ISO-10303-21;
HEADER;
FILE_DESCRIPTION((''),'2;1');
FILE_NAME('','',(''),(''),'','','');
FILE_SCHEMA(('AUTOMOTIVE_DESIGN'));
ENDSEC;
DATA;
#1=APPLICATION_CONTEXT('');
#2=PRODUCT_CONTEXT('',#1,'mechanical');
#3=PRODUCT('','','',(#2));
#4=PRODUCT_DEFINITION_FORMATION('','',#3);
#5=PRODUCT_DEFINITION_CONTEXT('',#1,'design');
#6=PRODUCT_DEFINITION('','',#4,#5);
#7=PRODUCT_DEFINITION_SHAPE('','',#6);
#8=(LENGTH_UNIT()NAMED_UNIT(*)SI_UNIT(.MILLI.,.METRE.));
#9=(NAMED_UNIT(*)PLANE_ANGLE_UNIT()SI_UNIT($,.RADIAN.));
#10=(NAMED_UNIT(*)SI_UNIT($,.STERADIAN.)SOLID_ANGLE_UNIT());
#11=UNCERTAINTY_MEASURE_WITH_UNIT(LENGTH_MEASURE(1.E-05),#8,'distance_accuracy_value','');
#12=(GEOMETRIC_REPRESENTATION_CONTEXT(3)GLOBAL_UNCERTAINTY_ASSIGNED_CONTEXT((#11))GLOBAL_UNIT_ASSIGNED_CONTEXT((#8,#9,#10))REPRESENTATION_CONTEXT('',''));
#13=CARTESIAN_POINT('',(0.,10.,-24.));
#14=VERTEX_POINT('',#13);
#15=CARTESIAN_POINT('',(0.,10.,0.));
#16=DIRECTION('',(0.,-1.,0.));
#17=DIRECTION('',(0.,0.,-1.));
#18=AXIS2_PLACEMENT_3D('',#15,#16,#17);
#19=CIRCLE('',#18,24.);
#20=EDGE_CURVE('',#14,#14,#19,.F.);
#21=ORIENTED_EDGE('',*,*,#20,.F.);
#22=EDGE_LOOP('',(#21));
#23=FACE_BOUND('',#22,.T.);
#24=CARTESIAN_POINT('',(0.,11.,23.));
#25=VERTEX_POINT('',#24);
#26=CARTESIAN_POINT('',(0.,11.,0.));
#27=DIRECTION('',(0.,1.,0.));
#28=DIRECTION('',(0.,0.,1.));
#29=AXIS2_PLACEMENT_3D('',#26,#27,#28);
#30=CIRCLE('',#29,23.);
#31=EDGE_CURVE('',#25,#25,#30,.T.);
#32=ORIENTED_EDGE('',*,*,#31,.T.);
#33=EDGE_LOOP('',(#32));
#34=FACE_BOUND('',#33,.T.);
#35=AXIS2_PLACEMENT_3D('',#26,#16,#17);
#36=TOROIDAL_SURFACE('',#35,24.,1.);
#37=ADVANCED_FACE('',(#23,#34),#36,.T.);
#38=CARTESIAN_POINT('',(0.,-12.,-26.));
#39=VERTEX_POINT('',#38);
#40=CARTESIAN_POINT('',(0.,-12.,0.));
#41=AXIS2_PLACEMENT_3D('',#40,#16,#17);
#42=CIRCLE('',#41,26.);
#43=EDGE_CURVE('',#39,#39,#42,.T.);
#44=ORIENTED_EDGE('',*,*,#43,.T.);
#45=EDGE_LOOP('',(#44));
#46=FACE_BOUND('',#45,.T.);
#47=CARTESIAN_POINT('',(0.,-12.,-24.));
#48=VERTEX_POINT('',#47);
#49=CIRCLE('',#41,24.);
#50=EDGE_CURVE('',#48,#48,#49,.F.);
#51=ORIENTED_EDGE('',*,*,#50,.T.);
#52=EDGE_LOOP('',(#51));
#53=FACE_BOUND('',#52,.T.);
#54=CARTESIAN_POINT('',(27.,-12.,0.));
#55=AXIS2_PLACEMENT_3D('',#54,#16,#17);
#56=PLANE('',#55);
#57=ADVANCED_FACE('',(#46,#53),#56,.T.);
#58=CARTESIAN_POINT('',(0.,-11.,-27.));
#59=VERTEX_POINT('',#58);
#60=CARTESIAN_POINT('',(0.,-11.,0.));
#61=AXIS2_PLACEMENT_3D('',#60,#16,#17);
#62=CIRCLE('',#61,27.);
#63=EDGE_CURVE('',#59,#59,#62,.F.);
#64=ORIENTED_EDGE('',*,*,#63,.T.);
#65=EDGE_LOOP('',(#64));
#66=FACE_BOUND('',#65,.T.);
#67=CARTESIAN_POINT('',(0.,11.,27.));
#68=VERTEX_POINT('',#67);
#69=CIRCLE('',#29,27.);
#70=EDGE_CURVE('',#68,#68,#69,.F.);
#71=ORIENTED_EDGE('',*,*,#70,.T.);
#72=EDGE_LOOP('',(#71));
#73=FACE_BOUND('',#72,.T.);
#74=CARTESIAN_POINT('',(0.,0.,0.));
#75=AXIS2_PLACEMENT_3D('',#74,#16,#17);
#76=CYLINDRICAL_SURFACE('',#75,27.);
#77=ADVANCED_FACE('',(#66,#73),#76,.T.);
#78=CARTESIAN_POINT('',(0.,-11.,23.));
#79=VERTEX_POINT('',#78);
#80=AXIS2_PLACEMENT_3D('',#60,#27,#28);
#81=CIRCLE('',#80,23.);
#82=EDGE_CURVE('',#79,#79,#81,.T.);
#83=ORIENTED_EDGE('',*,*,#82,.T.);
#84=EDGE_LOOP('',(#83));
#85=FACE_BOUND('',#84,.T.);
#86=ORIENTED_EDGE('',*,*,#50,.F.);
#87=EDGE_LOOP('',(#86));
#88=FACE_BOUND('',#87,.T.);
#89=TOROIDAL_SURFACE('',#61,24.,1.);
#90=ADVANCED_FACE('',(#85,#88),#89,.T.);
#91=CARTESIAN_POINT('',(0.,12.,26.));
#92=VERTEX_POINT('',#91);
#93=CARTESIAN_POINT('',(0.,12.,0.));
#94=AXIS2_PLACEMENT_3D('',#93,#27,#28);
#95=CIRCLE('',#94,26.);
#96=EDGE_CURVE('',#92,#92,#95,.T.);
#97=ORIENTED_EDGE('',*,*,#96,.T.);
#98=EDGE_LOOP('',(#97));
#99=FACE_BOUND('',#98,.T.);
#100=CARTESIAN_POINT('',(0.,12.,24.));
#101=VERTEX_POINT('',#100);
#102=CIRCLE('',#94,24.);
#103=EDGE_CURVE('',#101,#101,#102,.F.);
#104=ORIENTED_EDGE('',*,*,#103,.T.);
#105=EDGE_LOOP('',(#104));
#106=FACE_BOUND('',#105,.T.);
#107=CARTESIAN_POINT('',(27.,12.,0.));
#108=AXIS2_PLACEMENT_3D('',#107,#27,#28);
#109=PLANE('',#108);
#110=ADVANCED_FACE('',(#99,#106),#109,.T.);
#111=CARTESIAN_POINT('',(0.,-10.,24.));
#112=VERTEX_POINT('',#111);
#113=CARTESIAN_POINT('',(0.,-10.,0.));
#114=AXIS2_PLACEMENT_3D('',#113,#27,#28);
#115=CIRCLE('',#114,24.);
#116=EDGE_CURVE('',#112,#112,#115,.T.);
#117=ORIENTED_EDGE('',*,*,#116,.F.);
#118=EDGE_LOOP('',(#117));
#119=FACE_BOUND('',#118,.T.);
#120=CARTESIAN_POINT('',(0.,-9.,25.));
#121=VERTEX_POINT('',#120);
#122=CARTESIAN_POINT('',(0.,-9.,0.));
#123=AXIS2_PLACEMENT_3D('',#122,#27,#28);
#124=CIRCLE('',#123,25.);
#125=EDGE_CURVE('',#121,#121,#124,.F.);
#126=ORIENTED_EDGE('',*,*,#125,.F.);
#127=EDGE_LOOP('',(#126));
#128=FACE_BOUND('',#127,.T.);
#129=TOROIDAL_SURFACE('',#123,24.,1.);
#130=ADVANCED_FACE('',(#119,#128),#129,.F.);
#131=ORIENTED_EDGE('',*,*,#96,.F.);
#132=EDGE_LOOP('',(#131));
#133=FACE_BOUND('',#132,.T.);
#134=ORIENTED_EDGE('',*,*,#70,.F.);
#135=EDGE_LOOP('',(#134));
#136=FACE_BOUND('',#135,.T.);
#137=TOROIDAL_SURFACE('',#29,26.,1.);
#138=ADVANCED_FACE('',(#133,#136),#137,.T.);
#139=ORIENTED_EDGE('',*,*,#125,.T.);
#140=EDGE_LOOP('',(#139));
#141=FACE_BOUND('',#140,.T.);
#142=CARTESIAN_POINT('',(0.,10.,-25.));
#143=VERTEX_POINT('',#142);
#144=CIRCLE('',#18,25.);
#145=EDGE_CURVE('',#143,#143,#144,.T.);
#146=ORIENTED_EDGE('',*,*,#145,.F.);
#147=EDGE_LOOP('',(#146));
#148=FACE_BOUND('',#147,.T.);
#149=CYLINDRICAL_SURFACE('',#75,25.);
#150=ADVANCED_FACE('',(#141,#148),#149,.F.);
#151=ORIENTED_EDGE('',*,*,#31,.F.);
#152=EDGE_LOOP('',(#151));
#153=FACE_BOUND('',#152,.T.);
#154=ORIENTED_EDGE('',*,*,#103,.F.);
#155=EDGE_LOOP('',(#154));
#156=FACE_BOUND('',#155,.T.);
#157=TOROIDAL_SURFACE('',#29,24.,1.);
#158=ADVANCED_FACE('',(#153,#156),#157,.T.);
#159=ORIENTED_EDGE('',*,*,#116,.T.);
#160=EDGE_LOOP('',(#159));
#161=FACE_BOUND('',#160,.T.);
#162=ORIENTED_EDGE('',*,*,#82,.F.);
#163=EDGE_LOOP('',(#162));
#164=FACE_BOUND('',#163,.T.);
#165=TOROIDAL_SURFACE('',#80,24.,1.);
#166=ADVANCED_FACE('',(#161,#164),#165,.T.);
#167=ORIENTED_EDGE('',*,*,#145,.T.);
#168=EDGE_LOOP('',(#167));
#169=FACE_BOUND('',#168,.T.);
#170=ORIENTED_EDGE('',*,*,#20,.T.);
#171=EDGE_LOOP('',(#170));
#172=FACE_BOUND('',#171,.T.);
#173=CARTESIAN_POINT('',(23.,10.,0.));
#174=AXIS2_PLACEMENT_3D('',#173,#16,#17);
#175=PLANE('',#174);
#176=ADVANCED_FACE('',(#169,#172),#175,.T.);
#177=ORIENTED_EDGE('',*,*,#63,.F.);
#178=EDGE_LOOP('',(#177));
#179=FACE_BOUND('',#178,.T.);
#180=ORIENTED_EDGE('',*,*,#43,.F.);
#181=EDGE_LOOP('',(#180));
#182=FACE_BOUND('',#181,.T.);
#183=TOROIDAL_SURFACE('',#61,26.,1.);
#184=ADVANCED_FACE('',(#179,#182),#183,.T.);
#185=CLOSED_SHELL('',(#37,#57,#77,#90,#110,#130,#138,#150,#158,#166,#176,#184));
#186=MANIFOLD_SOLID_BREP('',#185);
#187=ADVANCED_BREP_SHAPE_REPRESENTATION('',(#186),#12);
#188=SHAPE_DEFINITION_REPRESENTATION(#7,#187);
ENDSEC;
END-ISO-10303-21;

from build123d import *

# Parameters (mm, degrees)
FILLET1_R = 1


with BuildPart() as part:
    # Sketch3 → Revolve1 (revolve)
    with BuildSketch(Plane.XY, mode=Mode.PRIVATE) as revolve1_sk:
        Polygon((27, -12), (27, 12), (23, 12), (23, 10), (25, 10), (25, -10), (23, -10), (23, -12), align=None)
    revolve(revolve1_sk.sketch.rotate(Axis((0, 0, 0), (0, 1, 0)), 90), axis=Axis((0, 0, 0), (0, 1, 0)))

    # Fillet1
    fillet1_edges = [part.edges().sort_by_distance(p)[0] for p in [
        (0, 12, 23),
        (0, 12, 27),
        (0, -12, 27),
        (0, -12, 23),
        (0, -10, 23),
        (0, -10, 25),
        (0, 10, 23),
    ]]
    fillet(fillet1_edges, radius=FILLET1_R - 0.0001)  # a hair under: the kernel refuses the full size


solid = part.part
